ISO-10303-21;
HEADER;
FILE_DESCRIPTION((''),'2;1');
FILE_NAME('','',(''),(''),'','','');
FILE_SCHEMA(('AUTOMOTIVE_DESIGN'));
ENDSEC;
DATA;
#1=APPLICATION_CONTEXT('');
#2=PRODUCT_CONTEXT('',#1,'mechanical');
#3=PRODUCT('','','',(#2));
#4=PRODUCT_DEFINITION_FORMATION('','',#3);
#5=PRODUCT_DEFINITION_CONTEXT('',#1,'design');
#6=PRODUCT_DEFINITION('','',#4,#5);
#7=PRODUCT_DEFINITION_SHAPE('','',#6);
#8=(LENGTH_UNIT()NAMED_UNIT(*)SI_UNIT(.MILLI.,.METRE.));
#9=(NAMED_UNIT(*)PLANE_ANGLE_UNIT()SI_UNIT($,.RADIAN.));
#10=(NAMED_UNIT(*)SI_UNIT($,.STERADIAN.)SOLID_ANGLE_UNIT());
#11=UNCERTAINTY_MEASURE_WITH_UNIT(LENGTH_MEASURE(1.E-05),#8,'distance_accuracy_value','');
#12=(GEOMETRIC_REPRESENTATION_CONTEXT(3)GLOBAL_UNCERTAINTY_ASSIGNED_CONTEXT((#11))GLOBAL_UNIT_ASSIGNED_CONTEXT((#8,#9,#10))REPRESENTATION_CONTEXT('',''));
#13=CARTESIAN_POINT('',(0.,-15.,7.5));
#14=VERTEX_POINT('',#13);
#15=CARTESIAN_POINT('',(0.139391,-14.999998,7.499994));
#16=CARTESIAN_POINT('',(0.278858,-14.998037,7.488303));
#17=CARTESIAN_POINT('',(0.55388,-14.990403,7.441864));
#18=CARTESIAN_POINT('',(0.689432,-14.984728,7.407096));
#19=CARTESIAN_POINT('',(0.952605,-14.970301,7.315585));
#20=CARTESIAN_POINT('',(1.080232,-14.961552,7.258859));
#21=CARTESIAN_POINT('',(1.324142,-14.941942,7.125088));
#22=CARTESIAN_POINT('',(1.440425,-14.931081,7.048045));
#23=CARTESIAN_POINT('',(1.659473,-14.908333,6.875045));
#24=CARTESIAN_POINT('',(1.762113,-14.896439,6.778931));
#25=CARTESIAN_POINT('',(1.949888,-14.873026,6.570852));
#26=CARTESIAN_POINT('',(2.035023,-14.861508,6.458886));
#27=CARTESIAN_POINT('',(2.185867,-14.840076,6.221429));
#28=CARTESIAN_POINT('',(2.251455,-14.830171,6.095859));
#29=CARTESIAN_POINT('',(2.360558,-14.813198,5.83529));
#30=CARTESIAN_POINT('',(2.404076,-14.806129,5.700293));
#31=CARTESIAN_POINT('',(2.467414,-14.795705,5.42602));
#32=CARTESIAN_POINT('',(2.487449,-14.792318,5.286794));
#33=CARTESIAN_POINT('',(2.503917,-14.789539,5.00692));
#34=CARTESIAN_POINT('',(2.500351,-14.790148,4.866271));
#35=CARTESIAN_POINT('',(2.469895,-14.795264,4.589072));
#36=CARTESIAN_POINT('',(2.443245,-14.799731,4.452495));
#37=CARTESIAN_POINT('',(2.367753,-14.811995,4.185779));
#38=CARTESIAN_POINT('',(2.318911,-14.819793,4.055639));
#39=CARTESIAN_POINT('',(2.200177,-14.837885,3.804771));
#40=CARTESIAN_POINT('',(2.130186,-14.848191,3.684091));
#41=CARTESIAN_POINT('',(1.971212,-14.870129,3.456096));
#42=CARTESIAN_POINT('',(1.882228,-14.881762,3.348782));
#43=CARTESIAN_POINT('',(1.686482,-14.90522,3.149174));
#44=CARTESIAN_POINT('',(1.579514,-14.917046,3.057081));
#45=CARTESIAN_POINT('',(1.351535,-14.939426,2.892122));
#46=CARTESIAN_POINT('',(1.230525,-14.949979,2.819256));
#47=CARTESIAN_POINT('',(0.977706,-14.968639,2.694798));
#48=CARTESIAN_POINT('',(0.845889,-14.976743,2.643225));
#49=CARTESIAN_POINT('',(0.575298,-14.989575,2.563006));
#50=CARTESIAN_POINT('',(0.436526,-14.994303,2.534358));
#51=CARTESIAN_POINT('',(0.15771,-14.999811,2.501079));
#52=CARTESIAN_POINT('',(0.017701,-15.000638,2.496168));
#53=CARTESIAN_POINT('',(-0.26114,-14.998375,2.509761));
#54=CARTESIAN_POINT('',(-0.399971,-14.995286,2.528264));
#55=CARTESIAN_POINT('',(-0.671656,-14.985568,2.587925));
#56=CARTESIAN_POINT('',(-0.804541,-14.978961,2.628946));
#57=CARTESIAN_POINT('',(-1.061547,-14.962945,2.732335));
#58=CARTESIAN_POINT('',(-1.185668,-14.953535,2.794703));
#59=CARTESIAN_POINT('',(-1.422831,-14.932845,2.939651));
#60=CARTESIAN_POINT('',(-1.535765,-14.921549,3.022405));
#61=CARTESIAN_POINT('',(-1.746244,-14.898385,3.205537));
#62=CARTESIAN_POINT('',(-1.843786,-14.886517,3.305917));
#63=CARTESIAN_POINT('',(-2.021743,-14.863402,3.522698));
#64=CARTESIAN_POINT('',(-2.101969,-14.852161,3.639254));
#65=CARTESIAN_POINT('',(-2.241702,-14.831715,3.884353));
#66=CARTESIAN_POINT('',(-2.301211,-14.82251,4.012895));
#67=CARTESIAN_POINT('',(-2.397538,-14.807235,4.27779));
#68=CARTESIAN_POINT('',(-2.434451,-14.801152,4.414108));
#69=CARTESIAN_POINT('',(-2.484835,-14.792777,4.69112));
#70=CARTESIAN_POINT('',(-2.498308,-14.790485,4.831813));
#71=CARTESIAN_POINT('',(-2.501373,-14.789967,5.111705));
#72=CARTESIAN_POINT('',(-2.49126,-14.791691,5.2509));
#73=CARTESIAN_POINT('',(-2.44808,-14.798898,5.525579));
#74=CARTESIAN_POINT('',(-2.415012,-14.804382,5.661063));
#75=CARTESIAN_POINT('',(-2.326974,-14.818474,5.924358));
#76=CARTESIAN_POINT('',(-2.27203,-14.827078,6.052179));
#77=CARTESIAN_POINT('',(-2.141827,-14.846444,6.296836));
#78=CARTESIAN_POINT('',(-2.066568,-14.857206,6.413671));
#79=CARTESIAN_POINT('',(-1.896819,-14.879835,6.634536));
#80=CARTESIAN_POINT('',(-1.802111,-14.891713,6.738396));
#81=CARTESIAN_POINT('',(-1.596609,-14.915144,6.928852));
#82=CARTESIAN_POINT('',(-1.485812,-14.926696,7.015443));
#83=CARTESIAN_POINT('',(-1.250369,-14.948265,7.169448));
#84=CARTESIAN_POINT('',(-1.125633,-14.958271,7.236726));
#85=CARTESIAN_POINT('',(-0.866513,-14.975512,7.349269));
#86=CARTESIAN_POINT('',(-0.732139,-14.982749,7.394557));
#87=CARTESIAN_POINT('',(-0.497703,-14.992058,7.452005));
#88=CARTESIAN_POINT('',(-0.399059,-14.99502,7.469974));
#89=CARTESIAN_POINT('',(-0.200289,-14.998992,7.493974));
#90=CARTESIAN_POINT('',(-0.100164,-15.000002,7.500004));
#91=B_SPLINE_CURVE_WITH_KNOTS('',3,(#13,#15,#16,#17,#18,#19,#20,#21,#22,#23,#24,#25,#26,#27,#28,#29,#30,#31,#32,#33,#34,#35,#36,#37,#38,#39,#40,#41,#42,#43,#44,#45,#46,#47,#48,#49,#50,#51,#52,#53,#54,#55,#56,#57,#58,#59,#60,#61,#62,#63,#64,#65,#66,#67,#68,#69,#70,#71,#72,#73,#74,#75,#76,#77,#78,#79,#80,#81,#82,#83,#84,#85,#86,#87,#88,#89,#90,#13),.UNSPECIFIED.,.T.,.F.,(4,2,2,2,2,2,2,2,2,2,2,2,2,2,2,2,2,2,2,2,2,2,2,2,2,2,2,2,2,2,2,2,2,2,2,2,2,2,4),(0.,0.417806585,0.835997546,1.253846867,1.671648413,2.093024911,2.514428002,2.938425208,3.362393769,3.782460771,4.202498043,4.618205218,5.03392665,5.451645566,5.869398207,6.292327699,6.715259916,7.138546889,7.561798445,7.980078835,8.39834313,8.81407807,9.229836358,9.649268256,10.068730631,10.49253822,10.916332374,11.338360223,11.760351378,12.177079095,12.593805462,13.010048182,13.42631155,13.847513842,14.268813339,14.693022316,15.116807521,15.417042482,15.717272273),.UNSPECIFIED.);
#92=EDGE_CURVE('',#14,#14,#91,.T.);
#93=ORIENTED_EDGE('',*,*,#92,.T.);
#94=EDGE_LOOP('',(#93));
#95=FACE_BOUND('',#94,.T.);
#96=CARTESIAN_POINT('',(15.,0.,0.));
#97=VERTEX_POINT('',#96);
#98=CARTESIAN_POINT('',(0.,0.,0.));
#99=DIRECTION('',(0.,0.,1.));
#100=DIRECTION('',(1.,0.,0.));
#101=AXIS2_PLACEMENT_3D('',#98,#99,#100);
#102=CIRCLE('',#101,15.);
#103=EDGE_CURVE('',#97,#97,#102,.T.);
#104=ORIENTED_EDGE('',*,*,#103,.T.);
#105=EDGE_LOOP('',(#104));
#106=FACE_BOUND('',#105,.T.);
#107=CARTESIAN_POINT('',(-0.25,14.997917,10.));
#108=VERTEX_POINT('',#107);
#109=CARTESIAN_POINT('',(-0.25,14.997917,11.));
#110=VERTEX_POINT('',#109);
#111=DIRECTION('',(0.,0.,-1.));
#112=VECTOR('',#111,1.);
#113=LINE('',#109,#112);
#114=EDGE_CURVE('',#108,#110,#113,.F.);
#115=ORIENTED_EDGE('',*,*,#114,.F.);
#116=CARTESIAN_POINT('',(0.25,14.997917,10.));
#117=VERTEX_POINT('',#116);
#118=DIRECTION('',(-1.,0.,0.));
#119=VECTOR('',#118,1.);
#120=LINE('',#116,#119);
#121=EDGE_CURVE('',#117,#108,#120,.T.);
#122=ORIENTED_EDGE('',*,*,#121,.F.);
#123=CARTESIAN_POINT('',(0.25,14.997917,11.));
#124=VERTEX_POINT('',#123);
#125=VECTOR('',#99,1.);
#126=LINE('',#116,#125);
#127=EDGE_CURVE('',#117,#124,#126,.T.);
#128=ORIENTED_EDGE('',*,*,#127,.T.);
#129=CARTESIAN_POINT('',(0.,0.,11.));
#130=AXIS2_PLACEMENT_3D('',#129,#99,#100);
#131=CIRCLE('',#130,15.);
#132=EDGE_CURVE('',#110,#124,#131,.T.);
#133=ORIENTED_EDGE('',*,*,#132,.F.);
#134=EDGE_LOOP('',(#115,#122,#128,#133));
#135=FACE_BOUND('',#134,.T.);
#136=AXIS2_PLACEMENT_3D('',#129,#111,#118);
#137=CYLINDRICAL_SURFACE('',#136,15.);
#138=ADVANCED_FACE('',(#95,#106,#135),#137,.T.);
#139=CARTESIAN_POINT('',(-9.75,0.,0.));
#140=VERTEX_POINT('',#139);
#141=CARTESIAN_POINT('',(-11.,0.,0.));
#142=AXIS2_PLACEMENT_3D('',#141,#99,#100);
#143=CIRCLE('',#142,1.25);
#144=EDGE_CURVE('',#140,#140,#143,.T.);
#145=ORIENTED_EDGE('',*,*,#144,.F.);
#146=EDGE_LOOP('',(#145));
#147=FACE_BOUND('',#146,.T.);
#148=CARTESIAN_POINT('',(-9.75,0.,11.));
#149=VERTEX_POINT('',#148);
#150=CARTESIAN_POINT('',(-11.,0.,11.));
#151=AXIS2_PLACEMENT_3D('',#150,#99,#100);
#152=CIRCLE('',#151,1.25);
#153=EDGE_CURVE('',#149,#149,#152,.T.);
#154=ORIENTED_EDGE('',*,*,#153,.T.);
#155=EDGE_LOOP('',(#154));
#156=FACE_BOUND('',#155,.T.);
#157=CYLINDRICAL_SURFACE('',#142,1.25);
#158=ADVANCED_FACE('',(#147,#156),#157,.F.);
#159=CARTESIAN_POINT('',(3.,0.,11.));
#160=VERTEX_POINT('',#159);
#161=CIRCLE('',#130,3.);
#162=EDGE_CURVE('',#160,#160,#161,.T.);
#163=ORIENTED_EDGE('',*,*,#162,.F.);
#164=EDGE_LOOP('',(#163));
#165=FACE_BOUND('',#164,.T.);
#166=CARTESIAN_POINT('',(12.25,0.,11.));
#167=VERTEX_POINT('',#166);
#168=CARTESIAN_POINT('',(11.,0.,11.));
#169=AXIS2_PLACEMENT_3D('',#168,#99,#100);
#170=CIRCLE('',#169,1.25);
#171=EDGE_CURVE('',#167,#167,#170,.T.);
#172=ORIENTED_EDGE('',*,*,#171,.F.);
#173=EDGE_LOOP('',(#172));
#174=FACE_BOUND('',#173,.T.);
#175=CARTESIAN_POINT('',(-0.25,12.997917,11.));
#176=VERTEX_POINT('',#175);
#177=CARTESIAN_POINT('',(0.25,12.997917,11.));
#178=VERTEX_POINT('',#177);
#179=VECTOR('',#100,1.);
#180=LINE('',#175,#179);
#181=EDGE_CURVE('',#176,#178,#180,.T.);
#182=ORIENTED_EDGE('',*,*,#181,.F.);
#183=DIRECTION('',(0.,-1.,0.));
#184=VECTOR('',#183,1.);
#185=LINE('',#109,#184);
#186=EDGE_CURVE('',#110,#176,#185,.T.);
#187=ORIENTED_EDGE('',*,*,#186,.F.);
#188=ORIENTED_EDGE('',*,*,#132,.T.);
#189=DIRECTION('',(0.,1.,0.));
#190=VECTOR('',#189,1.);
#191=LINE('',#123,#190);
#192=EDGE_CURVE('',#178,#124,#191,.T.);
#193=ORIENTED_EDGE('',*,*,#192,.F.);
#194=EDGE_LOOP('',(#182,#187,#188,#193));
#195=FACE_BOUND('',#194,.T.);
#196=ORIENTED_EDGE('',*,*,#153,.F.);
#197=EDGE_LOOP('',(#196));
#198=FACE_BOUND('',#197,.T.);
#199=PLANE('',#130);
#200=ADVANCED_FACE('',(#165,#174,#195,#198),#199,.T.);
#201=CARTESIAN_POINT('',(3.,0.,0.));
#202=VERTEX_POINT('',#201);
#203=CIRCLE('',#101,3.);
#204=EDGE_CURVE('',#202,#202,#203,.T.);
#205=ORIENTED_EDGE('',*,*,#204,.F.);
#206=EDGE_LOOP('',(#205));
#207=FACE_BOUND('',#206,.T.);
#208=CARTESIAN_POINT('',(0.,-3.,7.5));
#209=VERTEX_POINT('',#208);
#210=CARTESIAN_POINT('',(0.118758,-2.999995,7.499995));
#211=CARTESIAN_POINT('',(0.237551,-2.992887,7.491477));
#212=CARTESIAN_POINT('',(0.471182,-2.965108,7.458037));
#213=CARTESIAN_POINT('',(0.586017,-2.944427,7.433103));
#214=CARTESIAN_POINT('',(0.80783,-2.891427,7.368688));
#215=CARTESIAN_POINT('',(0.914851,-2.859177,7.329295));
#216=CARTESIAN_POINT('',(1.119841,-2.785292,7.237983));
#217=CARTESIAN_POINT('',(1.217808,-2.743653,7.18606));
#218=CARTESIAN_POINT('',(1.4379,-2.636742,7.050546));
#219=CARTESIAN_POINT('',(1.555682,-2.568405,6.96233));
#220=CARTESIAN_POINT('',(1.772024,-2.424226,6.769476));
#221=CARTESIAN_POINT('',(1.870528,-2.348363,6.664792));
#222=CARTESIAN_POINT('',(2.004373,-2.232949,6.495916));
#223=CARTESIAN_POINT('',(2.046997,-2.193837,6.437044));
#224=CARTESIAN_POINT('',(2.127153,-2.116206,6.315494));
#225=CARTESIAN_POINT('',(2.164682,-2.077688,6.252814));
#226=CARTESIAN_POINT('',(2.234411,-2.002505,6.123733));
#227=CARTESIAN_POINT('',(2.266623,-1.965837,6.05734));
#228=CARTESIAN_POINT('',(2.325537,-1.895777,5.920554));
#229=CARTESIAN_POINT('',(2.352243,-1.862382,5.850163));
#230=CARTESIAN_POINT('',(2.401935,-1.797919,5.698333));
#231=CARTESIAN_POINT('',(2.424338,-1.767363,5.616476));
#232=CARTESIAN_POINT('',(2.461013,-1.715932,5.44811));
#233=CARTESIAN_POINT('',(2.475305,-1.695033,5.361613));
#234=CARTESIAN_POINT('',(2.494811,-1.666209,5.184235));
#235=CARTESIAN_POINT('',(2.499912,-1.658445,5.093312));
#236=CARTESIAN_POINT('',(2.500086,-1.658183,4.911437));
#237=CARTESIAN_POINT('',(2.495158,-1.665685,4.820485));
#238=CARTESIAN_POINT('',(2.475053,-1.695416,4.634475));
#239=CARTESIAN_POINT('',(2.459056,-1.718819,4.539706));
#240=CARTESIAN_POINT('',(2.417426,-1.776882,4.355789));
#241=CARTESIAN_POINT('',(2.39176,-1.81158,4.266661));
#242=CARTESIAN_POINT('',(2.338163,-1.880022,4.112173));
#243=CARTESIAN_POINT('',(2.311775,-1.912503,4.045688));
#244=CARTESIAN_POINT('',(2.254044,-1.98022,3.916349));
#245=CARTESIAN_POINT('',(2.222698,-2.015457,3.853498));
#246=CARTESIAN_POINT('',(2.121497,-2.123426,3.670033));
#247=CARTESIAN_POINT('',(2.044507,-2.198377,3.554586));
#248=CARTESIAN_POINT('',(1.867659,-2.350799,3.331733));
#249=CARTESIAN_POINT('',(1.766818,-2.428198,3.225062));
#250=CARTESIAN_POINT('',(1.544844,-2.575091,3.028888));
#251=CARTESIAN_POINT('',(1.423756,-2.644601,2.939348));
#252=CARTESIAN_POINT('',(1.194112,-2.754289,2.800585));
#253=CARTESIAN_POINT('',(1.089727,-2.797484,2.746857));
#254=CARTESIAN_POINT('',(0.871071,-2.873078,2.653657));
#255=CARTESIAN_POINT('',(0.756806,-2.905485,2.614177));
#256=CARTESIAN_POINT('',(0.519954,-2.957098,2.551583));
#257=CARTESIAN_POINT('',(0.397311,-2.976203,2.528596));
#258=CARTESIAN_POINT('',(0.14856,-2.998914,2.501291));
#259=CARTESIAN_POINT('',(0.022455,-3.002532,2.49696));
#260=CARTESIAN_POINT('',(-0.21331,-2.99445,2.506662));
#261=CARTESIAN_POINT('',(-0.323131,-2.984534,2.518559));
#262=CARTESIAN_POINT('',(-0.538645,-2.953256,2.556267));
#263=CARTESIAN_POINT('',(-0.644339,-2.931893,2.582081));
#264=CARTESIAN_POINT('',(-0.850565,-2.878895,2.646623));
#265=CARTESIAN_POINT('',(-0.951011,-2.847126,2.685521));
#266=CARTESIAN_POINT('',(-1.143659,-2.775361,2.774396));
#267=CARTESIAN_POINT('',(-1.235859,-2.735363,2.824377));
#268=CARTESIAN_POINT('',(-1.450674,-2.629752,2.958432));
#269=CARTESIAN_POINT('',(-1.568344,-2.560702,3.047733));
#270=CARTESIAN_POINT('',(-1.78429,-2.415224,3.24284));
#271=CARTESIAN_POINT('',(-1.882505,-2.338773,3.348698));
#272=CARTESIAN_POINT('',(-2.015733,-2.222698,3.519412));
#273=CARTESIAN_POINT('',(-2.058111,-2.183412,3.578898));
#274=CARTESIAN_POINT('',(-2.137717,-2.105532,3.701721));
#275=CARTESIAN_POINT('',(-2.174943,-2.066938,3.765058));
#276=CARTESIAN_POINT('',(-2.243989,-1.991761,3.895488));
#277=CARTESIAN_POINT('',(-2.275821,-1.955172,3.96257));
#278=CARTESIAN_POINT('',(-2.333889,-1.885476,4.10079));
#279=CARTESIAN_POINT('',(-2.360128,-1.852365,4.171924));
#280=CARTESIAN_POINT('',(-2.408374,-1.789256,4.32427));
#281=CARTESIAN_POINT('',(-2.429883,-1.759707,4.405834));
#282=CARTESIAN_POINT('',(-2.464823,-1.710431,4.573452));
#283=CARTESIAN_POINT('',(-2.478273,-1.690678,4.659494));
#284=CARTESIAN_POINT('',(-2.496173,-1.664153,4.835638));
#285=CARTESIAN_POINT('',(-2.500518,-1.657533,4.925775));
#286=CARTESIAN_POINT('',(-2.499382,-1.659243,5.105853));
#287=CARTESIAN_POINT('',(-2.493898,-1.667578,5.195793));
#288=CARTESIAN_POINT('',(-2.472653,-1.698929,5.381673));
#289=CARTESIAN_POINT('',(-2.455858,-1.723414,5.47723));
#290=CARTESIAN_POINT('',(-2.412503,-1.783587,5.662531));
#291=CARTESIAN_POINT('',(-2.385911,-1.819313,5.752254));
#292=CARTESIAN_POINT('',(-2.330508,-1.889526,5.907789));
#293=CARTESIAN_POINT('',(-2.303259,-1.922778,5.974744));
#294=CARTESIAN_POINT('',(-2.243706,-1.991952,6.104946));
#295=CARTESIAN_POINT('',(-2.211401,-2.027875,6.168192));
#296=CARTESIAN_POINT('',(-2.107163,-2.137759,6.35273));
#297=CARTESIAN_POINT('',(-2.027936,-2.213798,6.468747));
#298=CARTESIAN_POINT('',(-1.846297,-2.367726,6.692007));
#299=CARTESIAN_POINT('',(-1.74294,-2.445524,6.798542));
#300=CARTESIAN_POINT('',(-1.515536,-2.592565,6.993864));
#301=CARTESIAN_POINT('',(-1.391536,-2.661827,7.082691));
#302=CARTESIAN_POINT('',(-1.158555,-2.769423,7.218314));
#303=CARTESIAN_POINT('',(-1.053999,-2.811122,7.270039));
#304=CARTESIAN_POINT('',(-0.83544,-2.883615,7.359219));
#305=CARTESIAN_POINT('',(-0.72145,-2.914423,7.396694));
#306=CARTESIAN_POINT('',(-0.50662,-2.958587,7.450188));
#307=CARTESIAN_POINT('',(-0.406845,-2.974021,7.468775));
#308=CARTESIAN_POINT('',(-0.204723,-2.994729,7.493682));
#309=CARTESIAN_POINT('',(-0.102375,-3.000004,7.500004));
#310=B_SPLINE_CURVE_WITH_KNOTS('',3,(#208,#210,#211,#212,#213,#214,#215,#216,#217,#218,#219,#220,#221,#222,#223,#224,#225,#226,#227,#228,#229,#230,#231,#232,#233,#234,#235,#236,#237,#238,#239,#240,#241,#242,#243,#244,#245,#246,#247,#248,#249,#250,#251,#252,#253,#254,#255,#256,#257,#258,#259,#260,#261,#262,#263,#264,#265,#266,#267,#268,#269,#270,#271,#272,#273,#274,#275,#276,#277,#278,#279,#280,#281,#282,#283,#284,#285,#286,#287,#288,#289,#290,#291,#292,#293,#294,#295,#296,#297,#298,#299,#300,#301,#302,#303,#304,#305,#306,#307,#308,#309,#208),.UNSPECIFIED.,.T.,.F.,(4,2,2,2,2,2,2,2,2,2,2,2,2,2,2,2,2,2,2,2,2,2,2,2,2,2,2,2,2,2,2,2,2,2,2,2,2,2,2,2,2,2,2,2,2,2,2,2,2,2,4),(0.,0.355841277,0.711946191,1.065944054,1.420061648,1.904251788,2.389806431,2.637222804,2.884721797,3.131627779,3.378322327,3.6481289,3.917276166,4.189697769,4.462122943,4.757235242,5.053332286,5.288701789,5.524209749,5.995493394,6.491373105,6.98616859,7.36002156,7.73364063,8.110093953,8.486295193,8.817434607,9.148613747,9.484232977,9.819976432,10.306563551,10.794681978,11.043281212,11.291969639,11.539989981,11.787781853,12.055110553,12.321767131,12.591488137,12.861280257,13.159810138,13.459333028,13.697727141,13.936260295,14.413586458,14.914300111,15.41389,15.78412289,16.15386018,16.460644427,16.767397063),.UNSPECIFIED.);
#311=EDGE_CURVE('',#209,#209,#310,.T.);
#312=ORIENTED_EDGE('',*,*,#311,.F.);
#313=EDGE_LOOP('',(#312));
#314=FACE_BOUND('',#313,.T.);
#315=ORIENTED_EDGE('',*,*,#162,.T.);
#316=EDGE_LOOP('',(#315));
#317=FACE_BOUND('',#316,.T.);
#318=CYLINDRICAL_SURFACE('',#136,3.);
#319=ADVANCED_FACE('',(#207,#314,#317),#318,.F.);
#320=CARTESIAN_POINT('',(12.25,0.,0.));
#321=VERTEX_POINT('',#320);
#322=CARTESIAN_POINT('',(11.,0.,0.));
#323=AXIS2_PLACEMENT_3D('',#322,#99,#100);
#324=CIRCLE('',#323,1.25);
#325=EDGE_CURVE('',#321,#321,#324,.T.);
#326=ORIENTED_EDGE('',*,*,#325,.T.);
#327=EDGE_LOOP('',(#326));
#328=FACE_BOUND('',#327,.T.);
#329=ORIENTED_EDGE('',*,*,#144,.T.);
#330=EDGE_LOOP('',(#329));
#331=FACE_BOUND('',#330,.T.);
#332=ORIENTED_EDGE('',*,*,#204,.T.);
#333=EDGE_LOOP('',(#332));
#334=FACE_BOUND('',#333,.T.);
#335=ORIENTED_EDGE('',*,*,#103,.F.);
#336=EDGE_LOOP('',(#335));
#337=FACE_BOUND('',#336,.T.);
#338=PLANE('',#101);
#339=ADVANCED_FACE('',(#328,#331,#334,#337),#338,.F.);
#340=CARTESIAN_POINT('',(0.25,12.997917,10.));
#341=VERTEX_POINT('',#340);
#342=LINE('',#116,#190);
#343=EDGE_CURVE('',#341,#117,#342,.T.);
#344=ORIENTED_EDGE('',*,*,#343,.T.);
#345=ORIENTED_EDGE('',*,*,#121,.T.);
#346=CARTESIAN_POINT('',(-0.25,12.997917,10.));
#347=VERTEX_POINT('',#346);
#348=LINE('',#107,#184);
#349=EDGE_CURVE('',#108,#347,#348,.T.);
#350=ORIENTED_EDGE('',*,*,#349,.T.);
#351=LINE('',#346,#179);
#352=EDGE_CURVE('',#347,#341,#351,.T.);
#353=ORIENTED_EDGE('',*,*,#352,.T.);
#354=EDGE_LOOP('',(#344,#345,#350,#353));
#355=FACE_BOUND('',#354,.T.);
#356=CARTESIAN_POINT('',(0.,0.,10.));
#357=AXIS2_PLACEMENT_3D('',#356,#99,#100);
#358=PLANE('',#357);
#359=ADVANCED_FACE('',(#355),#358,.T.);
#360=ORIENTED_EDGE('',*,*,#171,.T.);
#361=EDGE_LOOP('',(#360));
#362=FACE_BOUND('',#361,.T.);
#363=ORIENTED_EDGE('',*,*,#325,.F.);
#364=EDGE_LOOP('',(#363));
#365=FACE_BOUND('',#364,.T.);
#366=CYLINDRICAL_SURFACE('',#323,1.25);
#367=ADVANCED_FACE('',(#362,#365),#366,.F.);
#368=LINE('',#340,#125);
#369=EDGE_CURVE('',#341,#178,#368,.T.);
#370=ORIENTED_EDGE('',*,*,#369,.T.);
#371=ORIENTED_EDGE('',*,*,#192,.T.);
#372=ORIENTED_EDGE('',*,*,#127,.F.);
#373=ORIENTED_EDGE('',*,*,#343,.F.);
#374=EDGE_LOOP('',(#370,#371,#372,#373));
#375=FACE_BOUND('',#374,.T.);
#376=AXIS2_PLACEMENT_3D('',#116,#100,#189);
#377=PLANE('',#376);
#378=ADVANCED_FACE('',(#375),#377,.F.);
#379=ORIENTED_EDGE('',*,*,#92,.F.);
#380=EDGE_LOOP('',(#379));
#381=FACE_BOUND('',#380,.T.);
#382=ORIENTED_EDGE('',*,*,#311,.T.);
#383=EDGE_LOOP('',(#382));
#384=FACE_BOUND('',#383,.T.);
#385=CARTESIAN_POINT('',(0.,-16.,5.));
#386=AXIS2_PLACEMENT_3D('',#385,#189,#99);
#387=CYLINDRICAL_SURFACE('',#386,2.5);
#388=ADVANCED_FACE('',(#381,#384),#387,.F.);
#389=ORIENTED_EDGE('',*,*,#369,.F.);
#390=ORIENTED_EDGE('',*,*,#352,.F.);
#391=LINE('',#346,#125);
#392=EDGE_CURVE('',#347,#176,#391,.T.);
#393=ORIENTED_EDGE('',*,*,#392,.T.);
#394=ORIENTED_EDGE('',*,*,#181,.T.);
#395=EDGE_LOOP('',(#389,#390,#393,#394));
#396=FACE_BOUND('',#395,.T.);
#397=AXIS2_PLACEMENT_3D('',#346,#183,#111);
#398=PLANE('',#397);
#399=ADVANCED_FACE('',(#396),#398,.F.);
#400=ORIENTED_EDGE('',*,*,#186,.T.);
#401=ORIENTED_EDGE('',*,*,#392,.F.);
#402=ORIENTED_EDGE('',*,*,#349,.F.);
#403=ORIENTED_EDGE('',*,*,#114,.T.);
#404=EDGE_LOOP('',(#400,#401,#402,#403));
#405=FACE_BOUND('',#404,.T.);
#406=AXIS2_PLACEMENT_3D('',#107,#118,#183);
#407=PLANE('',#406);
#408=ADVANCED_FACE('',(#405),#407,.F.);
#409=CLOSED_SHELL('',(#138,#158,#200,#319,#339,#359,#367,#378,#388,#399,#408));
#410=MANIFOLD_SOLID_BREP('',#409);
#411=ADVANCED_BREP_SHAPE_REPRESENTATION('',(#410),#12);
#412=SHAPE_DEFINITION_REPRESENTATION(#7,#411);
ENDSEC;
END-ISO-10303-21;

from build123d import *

# Parameters (mm, degrees)
CROQUIS1_R              = 15
CROQUIS1_R_2            = 3
SALIENTE_EXTRUIR1_DEPTH = 11
CORTAR_EXTRUIR1_START   = -1
CORTAR_EXTRUIR1_DEPTH   = 1
CROQUIS3_R              = 1.25
CORTAR_EXTRUIR2_DEPTH   = 24.895606291
CROQUIS4_R              = 2.5
CORTAR_EXTRUIR3_DEPTH   = 16


# Read off the part's stored shape, not the designer's step: Cortar-Extruir1
with BuildPart() as part:
    # Croquis1 → Saliente-Extruir1 (new body)
    with BuildSketch(Plane.XY):
        Circle(CROQUIS1_R)
        Circle(CROQUIS1_R_2, mode=Mode.SUBTRACT)
    extrude(amount=SALIENTE_EXTRUIR1_DEPTH)

    # Cortar-Extruir1 outline → Cortar-Extruir1 (cut)
    with BuildSketch(Plane.XY.offset(11).offset(CORTAR_EXTRUIR1_START)):
        with BuildLine():
            Line((-0.25, 14.997916522), (-0.25, 12.997916522))
            Line((-0.25, 12.997916522), (0.25, 12.997916522))
            Line((0.25, 12.997916522), (0.25, 14.997916522))
            ThreePointArc((0.25, 14.997916522), (0, 15), (-0.25, 14.997916522))
        make_face()
    extrude(amount=CORTAR_EXTRUIR1_DEPTH, mode=Mode.SUBTRACT)

    # Croquis3 → Cortar-Extruir2 (cut, through all)
    with BuildSketch(Plane.XY.offset(11)):
        with Locations((11, 0)):
            Circle(CROQUIS3_R)
        with Locations((-11, 0)):
            Circle(CROQUIS3_R)
    extrude(amount=-CORTAR_EXTRUIR2_DEPTH, mode=Mode.SUBTRACT)

    # Croquis4 → Cortar-Extruir3 (cut)
    with BuildSketch(Plane(origin=(0, 0, 0), x_dir=(1, 0, 0), z_dir=(0, 1, 0))):
        with Locations(Location((0, -5, 0), (0, 0, 270))):
            Circle(CROQUIS4_R)
    extrude(amount=-CORTAR_EXTRUIR3_DEPTH, mode=Mode.SUBTRACT)


solid = part.part
